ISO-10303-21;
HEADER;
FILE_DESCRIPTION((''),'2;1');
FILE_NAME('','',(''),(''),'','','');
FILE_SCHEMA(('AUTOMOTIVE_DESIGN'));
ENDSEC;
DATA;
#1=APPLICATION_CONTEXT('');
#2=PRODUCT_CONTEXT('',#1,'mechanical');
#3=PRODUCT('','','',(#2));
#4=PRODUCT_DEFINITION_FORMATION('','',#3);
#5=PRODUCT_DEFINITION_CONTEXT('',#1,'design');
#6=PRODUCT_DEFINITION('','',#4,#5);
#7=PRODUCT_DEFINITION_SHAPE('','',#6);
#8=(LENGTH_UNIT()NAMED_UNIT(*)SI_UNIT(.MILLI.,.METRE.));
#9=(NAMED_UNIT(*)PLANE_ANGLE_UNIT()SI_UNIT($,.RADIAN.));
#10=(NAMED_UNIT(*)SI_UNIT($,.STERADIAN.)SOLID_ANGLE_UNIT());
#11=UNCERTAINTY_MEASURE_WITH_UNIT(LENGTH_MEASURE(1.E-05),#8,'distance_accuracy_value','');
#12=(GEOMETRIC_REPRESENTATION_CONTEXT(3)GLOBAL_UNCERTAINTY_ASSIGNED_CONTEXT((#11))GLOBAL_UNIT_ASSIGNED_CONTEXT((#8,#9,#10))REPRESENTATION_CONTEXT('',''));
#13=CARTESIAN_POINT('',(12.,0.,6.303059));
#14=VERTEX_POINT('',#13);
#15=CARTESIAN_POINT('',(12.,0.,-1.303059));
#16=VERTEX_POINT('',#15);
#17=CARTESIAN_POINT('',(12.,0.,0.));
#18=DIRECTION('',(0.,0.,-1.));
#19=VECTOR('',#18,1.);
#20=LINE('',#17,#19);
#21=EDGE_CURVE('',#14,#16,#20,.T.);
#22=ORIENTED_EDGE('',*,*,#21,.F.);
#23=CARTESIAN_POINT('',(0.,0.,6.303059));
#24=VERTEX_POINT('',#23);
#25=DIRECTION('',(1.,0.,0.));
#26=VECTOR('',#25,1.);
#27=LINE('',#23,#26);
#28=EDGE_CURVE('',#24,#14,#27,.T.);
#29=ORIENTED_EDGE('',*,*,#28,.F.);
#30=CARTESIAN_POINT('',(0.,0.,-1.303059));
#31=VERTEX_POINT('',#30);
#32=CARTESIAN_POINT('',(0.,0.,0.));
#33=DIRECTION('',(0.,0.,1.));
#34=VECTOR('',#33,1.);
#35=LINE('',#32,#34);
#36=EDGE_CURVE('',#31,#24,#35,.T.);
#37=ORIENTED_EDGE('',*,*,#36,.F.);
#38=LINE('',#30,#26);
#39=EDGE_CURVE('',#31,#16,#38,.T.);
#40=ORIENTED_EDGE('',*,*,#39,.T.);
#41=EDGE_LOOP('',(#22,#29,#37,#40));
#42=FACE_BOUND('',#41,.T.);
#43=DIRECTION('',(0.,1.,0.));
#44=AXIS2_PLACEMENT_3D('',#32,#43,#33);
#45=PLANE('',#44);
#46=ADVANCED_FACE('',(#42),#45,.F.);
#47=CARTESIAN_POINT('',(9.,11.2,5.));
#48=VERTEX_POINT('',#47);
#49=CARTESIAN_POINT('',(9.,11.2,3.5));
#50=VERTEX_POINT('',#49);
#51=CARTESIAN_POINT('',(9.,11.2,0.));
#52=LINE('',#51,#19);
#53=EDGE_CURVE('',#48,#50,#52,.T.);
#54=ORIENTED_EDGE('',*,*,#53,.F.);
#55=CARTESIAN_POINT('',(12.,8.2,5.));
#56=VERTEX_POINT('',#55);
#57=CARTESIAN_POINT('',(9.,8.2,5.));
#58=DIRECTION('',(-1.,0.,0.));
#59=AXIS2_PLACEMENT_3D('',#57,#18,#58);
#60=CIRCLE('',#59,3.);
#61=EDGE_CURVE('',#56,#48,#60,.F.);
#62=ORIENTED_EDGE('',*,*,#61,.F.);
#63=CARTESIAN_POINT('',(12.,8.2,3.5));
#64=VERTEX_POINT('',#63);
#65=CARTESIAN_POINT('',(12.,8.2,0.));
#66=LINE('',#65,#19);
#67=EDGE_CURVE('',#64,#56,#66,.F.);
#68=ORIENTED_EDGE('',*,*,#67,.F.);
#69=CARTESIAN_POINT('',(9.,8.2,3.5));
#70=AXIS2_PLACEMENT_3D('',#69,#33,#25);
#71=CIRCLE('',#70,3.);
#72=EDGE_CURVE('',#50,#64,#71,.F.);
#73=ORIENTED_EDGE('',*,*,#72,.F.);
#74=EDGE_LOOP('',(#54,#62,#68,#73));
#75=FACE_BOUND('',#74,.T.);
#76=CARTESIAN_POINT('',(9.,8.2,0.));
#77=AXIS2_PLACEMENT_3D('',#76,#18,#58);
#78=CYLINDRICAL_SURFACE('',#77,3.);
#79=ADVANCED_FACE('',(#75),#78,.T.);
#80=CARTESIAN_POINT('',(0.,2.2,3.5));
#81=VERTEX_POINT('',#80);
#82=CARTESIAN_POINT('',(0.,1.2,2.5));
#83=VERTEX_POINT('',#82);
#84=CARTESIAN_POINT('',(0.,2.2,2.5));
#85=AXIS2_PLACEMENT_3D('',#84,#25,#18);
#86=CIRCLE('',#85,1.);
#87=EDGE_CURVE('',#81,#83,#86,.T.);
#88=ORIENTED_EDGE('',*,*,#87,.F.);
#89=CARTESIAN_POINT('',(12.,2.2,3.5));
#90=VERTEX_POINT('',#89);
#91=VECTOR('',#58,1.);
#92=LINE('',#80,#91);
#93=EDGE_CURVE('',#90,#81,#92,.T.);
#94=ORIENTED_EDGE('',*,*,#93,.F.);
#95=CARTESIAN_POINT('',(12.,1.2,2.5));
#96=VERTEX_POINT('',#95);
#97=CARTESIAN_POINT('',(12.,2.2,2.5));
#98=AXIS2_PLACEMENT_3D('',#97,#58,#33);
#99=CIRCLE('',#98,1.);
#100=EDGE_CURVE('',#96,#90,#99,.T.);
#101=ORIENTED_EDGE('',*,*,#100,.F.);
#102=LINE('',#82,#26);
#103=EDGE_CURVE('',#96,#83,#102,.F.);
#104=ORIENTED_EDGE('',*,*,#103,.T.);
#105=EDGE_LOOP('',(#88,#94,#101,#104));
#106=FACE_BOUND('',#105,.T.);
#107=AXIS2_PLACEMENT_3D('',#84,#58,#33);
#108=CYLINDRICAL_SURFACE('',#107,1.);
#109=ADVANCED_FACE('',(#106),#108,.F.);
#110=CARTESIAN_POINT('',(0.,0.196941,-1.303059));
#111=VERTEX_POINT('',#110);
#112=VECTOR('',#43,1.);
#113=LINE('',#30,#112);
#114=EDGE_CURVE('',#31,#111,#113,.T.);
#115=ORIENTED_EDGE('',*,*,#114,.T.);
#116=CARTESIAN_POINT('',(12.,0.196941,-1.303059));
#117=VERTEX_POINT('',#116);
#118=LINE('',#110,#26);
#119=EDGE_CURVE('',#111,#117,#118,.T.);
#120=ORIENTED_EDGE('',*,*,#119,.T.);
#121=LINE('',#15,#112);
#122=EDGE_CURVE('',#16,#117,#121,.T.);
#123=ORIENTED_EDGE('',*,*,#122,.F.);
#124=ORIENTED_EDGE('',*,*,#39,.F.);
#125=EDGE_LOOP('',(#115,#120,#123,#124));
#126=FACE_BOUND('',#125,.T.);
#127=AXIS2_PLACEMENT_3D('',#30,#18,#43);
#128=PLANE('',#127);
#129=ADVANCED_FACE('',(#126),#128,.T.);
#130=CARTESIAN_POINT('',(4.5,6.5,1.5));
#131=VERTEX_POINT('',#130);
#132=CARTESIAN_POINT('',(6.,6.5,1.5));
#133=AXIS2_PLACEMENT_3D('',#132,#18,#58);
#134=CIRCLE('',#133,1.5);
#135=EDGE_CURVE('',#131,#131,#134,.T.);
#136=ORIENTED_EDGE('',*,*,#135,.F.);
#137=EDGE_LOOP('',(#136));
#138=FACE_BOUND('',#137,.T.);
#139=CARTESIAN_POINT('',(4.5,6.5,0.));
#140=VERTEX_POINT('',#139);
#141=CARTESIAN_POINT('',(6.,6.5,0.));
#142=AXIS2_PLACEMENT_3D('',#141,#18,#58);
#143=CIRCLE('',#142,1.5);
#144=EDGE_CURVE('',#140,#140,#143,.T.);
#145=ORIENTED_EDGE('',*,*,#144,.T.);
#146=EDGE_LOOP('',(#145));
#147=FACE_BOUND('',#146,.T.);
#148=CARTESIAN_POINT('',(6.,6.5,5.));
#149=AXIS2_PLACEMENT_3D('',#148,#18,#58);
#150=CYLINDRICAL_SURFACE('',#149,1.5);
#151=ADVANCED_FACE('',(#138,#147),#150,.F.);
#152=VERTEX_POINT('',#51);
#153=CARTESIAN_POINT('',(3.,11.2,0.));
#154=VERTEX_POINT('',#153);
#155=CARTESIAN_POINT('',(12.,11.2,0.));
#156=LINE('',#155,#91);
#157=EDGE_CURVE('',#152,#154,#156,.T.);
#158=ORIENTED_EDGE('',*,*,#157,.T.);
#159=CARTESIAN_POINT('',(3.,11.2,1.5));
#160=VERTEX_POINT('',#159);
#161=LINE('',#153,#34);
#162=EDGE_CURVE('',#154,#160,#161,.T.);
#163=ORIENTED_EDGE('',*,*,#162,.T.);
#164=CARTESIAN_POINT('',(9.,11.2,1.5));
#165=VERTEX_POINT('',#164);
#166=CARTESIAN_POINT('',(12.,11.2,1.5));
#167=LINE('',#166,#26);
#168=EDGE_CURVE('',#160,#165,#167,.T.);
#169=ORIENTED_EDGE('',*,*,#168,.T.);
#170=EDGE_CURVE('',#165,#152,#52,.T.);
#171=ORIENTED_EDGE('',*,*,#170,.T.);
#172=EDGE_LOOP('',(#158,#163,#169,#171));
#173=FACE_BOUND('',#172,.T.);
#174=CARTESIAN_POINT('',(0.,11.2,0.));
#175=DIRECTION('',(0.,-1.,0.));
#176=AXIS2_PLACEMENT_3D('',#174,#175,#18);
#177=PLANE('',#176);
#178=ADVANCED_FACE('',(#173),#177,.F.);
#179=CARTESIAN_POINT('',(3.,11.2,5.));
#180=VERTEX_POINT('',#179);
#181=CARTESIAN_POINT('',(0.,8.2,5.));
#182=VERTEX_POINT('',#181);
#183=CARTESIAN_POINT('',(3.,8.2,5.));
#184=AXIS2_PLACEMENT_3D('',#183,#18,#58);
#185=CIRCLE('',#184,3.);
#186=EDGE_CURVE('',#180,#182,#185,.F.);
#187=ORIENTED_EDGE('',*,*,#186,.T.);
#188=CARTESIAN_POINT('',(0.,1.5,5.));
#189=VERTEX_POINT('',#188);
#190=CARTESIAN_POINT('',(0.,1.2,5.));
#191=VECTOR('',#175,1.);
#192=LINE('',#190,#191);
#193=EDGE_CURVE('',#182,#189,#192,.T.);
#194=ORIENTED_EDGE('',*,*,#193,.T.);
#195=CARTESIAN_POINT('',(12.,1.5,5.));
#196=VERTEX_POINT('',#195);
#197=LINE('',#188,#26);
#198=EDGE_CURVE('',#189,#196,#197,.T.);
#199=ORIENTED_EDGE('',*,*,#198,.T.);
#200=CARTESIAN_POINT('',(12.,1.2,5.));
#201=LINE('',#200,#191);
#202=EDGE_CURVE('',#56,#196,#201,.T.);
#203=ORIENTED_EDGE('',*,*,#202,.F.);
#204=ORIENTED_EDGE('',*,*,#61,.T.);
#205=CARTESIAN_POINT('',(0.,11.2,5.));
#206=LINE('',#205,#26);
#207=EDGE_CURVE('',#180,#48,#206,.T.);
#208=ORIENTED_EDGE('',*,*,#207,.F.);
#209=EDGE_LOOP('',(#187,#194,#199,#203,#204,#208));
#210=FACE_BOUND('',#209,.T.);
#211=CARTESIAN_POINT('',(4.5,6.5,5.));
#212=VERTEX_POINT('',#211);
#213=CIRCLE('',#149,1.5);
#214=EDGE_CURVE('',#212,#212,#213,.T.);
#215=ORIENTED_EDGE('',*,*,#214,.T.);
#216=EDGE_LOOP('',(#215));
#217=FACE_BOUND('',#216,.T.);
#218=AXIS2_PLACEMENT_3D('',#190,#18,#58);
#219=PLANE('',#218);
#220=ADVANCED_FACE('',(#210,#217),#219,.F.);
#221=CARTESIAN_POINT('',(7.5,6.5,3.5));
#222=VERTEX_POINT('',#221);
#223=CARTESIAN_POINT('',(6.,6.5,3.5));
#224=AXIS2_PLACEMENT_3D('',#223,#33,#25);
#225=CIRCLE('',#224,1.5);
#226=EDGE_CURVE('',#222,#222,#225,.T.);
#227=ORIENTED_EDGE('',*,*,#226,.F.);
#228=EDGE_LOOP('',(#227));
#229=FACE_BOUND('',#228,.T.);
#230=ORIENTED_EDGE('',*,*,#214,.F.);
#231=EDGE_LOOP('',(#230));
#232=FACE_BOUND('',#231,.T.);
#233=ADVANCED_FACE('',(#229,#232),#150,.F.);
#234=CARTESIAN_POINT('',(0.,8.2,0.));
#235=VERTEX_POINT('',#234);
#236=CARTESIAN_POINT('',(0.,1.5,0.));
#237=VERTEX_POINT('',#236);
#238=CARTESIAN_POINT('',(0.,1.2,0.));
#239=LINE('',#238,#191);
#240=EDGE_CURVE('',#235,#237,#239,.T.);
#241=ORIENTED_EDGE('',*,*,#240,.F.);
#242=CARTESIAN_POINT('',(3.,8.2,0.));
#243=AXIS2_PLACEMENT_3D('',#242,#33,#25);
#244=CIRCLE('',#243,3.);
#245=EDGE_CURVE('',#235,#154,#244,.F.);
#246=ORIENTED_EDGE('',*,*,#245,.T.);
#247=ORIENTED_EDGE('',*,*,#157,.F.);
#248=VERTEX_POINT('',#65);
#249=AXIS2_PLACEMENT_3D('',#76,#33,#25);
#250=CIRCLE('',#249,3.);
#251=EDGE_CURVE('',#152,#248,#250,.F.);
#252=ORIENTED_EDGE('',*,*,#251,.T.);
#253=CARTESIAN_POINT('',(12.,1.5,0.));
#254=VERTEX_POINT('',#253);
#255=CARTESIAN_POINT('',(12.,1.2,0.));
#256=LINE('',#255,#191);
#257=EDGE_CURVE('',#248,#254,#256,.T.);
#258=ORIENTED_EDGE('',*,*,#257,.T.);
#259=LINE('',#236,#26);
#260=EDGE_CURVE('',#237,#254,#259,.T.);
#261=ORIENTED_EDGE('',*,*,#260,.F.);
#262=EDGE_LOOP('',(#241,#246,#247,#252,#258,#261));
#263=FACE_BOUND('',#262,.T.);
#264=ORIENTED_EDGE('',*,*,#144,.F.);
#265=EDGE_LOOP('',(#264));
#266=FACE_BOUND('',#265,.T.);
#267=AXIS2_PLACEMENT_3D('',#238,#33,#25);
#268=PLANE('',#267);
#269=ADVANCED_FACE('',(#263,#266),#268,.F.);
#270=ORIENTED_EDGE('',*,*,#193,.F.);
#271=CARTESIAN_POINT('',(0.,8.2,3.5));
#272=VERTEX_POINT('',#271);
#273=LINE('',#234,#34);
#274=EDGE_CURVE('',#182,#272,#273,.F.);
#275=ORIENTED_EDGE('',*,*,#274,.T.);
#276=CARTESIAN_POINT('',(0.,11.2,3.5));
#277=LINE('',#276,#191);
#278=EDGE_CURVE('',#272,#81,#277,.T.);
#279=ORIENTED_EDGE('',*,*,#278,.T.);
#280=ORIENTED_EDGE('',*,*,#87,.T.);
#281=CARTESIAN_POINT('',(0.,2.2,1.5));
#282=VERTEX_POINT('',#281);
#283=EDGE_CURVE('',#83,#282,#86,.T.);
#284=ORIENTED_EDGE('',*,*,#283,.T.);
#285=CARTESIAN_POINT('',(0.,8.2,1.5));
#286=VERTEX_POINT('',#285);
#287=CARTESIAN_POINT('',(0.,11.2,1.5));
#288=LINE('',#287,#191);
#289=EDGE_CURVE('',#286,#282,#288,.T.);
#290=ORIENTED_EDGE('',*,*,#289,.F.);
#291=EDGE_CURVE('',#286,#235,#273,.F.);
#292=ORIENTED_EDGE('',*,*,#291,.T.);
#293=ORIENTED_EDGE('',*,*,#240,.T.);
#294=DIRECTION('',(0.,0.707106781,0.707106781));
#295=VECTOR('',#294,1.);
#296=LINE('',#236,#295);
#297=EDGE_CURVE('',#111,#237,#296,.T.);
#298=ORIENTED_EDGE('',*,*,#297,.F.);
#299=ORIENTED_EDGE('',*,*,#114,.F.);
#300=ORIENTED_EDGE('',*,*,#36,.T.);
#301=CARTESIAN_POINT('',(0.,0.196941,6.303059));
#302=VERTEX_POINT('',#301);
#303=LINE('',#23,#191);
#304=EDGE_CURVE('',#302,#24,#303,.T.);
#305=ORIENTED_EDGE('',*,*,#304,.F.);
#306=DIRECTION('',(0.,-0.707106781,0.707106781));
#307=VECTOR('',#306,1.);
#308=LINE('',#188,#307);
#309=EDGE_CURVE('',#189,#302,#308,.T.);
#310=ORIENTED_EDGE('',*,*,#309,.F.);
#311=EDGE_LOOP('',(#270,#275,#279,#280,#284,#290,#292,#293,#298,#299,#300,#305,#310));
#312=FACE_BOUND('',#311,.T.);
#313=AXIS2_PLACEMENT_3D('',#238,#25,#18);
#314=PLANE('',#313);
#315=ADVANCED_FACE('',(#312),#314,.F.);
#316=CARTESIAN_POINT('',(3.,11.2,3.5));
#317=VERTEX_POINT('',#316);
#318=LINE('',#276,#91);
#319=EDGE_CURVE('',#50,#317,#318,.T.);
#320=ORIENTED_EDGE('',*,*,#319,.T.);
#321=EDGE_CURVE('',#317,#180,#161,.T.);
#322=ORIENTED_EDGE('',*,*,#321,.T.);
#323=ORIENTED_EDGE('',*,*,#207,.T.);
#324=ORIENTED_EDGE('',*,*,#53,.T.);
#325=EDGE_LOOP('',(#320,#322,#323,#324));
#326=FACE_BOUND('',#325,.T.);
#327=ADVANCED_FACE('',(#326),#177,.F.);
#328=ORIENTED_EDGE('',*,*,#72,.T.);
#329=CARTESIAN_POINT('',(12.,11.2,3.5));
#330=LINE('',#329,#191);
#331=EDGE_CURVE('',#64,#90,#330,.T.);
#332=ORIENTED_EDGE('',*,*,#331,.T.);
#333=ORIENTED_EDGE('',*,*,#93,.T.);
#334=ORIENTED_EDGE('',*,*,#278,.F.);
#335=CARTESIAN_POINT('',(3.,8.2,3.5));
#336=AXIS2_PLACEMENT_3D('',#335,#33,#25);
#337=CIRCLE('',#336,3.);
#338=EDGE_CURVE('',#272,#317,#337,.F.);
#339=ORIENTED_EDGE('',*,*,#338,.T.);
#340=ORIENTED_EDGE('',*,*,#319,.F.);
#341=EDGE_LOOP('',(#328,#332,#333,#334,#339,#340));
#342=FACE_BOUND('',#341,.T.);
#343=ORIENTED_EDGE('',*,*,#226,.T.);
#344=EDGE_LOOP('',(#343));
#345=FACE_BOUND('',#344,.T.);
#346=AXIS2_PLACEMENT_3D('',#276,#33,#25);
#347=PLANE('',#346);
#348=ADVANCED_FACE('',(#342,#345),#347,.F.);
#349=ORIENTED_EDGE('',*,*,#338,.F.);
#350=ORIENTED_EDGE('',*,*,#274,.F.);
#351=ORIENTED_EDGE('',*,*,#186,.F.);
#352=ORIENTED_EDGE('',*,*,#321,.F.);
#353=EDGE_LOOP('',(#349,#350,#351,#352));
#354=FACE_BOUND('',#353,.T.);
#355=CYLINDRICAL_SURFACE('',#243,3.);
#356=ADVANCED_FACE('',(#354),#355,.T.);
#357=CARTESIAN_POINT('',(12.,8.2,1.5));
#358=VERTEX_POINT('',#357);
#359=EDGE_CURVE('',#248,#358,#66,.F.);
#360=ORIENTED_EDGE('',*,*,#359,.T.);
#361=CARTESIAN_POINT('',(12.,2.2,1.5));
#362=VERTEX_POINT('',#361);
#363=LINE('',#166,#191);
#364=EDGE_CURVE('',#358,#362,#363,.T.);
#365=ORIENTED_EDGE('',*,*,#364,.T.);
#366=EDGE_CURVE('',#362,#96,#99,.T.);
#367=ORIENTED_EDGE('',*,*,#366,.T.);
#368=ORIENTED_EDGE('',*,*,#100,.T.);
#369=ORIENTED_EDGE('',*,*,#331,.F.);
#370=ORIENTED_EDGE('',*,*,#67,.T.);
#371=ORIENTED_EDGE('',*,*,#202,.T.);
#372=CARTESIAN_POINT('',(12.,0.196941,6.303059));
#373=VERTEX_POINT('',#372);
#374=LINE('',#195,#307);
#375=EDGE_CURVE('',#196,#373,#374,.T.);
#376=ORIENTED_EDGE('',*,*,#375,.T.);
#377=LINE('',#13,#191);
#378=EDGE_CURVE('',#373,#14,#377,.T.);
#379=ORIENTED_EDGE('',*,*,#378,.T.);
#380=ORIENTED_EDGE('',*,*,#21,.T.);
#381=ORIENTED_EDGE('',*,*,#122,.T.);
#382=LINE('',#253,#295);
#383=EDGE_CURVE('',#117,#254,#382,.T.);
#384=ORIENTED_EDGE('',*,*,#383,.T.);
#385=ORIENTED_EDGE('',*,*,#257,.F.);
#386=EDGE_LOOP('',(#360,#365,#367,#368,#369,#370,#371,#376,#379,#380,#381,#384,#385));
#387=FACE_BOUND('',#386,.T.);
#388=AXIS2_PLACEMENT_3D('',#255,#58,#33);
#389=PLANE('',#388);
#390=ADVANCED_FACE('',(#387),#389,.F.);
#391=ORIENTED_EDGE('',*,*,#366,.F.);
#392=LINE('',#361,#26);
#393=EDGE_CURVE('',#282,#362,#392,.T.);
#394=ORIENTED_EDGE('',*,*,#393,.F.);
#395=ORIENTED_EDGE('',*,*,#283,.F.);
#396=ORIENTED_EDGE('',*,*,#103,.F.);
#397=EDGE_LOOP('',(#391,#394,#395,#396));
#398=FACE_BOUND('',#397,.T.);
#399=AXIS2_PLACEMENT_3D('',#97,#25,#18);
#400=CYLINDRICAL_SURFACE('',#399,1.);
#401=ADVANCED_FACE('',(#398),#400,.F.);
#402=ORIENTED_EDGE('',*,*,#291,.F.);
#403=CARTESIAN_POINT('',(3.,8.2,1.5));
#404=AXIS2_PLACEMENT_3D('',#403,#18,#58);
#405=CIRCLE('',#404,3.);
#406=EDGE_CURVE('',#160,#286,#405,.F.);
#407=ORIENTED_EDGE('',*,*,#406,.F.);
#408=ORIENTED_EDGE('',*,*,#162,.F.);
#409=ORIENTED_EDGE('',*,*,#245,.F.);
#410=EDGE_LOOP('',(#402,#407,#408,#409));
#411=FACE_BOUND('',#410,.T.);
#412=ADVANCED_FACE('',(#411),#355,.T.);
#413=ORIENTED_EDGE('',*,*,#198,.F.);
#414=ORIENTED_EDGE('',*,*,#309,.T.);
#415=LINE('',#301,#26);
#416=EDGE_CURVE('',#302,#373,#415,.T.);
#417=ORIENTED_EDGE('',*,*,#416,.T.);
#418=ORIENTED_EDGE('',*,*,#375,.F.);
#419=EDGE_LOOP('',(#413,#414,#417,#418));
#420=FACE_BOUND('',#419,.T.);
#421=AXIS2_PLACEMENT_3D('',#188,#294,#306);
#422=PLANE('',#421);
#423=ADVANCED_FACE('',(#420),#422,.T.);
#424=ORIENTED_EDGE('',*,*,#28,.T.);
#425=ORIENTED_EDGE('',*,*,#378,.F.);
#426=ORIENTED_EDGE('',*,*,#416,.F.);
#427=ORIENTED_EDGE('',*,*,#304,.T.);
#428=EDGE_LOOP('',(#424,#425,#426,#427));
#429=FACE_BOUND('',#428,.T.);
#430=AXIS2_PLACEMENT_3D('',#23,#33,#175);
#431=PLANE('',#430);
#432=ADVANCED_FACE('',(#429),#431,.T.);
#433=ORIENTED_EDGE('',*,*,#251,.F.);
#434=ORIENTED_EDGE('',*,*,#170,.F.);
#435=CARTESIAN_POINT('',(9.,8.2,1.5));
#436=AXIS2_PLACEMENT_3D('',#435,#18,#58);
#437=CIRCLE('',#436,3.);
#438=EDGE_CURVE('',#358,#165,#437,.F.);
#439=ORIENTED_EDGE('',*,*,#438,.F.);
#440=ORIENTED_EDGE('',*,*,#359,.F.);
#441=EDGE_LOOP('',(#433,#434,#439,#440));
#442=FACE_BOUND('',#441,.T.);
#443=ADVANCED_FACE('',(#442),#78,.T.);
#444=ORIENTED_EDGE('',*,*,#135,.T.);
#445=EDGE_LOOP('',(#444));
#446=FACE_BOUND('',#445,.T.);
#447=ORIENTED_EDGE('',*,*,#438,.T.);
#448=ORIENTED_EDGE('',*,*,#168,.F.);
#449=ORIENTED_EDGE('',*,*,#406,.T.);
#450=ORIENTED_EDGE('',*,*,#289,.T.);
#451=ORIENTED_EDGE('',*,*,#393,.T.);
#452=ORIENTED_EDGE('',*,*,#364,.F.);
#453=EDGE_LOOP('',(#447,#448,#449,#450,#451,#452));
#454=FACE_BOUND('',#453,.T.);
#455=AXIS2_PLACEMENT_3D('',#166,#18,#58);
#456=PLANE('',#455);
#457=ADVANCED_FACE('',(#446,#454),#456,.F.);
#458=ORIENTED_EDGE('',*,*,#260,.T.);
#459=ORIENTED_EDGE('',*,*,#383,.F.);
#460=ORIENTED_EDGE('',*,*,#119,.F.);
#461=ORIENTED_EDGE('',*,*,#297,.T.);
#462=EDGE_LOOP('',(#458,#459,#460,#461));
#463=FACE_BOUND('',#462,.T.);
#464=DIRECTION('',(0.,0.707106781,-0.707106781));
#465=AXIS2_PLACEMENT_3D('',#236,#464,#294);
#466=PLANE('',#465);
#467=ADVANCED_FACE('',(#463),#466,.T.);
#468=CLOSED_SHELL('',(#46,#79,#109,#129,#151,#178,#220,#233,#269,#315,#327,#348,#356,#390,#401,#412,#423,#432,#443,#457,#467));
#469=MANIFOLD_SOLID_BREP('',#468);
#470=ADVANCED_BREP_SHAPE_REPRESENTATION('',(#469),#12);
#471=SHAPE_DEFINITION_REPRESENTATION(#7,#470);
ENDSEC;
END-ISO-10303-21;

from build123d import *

# Parameters (mm, degrees)
SKETCH1_W           = 12
SKETCH1_H           = 5
BOSS_EXTRUDE1_DEPTH = 1.2
SKETCH2_W           = 12
SKETCH2_H           = 1.5
BOSS_EXTRUDE2_DEPTH = 10
FILLET1_R           = 3
FILLET2_R           = 1
SKETCH3_R           = 1.5
CUT_EXTRUDE1_DEPTH  = 18.159254063
BOSS_EXTRUDE3_DEPTH = 12


with BuildPart() as part:
    # Sketch1 → Boss-Extrude1 (new body)
    with BuildSketch(Plane(origin=(0, 0, 0), x_dir=(1, 0, 0), z_dir=(0, 1, 0))):
        with Locations((6, -2.5)):
            Rectangle(SKETCH1_W, SKETCH1_H)
    extrude(amount=BOSS_EXTRUDE1_DEPTH)

    # Sketch2 → Boss-Extrude2 (add)
    with BuildSketch(Plane(origin=(0, 1.2, 0), x_dir=(1, 0, 0), z_dir=(0, 1, 0))):
        with Locations((6, -4.25)):
            Rectangle(SKETCH2_W, SKETCH2_H)
        with Locations((6, -0.75)):
            Rectangle(SKETCH2_W, SKETCH2_H)
    extrude(amount=BOSS_EXTRUDE2_DEPTH)

    # Fillet1
    fillet1_edges = [part.edges().sort_by_distance(p)[0] for p in [
        (0, 11.2, 4.25),
        (12, 11.2, 4.25),
        (12, 11.2, 0.75),
        (0, 11.2, 0.75),
    ]]
    fillet(fillet1_edges, radius=FILLET1_R)

    # Fillet2
    fillet2_edges = [part.edges().sort_by_distance(p)[0] for p in [
        (6, 1.2, 3.5),
        (6, 1.2, 1.5),
    ]]
    fillet(fillet2_edges, radius=FILLET2_R - 0.0001)  # a hair under: the kernel refuses the full size

    # Sketch3 → Cut-Extrude1 (cut, through all)
    with BuildSketch(Plane(origin=(0, 0, 0), x_dir=(-1, 0, 0), z_dir=(0, 0, -1))):
        with Locations((-6, 6.5)):
            Circle(SKETCH3_R)
    extrude(amount=-CUT_EXTRUDE1_DEPTH, mode=Mode.SUBTRACT)

    # Sketch4 → Boss-Extrude3 (add)
    with BuildSketch(Plane(origin=(12, 0, 0), x_dir=(0, 0, -1), z_dir=(1, 0, 0))):
        Polygon((0, 1.5), (1.303058947, 0.196941053), (1.303058947, 0), (0, 0), align=None)
        Polygon((-6.303058947, 0), (-6.303058947, 0.196941053), (-5, 1.5), (-5, 0), align=None)
    extrude(amount=-BOSS_EXTRUDE3_DEPTH)


solid = part.part
